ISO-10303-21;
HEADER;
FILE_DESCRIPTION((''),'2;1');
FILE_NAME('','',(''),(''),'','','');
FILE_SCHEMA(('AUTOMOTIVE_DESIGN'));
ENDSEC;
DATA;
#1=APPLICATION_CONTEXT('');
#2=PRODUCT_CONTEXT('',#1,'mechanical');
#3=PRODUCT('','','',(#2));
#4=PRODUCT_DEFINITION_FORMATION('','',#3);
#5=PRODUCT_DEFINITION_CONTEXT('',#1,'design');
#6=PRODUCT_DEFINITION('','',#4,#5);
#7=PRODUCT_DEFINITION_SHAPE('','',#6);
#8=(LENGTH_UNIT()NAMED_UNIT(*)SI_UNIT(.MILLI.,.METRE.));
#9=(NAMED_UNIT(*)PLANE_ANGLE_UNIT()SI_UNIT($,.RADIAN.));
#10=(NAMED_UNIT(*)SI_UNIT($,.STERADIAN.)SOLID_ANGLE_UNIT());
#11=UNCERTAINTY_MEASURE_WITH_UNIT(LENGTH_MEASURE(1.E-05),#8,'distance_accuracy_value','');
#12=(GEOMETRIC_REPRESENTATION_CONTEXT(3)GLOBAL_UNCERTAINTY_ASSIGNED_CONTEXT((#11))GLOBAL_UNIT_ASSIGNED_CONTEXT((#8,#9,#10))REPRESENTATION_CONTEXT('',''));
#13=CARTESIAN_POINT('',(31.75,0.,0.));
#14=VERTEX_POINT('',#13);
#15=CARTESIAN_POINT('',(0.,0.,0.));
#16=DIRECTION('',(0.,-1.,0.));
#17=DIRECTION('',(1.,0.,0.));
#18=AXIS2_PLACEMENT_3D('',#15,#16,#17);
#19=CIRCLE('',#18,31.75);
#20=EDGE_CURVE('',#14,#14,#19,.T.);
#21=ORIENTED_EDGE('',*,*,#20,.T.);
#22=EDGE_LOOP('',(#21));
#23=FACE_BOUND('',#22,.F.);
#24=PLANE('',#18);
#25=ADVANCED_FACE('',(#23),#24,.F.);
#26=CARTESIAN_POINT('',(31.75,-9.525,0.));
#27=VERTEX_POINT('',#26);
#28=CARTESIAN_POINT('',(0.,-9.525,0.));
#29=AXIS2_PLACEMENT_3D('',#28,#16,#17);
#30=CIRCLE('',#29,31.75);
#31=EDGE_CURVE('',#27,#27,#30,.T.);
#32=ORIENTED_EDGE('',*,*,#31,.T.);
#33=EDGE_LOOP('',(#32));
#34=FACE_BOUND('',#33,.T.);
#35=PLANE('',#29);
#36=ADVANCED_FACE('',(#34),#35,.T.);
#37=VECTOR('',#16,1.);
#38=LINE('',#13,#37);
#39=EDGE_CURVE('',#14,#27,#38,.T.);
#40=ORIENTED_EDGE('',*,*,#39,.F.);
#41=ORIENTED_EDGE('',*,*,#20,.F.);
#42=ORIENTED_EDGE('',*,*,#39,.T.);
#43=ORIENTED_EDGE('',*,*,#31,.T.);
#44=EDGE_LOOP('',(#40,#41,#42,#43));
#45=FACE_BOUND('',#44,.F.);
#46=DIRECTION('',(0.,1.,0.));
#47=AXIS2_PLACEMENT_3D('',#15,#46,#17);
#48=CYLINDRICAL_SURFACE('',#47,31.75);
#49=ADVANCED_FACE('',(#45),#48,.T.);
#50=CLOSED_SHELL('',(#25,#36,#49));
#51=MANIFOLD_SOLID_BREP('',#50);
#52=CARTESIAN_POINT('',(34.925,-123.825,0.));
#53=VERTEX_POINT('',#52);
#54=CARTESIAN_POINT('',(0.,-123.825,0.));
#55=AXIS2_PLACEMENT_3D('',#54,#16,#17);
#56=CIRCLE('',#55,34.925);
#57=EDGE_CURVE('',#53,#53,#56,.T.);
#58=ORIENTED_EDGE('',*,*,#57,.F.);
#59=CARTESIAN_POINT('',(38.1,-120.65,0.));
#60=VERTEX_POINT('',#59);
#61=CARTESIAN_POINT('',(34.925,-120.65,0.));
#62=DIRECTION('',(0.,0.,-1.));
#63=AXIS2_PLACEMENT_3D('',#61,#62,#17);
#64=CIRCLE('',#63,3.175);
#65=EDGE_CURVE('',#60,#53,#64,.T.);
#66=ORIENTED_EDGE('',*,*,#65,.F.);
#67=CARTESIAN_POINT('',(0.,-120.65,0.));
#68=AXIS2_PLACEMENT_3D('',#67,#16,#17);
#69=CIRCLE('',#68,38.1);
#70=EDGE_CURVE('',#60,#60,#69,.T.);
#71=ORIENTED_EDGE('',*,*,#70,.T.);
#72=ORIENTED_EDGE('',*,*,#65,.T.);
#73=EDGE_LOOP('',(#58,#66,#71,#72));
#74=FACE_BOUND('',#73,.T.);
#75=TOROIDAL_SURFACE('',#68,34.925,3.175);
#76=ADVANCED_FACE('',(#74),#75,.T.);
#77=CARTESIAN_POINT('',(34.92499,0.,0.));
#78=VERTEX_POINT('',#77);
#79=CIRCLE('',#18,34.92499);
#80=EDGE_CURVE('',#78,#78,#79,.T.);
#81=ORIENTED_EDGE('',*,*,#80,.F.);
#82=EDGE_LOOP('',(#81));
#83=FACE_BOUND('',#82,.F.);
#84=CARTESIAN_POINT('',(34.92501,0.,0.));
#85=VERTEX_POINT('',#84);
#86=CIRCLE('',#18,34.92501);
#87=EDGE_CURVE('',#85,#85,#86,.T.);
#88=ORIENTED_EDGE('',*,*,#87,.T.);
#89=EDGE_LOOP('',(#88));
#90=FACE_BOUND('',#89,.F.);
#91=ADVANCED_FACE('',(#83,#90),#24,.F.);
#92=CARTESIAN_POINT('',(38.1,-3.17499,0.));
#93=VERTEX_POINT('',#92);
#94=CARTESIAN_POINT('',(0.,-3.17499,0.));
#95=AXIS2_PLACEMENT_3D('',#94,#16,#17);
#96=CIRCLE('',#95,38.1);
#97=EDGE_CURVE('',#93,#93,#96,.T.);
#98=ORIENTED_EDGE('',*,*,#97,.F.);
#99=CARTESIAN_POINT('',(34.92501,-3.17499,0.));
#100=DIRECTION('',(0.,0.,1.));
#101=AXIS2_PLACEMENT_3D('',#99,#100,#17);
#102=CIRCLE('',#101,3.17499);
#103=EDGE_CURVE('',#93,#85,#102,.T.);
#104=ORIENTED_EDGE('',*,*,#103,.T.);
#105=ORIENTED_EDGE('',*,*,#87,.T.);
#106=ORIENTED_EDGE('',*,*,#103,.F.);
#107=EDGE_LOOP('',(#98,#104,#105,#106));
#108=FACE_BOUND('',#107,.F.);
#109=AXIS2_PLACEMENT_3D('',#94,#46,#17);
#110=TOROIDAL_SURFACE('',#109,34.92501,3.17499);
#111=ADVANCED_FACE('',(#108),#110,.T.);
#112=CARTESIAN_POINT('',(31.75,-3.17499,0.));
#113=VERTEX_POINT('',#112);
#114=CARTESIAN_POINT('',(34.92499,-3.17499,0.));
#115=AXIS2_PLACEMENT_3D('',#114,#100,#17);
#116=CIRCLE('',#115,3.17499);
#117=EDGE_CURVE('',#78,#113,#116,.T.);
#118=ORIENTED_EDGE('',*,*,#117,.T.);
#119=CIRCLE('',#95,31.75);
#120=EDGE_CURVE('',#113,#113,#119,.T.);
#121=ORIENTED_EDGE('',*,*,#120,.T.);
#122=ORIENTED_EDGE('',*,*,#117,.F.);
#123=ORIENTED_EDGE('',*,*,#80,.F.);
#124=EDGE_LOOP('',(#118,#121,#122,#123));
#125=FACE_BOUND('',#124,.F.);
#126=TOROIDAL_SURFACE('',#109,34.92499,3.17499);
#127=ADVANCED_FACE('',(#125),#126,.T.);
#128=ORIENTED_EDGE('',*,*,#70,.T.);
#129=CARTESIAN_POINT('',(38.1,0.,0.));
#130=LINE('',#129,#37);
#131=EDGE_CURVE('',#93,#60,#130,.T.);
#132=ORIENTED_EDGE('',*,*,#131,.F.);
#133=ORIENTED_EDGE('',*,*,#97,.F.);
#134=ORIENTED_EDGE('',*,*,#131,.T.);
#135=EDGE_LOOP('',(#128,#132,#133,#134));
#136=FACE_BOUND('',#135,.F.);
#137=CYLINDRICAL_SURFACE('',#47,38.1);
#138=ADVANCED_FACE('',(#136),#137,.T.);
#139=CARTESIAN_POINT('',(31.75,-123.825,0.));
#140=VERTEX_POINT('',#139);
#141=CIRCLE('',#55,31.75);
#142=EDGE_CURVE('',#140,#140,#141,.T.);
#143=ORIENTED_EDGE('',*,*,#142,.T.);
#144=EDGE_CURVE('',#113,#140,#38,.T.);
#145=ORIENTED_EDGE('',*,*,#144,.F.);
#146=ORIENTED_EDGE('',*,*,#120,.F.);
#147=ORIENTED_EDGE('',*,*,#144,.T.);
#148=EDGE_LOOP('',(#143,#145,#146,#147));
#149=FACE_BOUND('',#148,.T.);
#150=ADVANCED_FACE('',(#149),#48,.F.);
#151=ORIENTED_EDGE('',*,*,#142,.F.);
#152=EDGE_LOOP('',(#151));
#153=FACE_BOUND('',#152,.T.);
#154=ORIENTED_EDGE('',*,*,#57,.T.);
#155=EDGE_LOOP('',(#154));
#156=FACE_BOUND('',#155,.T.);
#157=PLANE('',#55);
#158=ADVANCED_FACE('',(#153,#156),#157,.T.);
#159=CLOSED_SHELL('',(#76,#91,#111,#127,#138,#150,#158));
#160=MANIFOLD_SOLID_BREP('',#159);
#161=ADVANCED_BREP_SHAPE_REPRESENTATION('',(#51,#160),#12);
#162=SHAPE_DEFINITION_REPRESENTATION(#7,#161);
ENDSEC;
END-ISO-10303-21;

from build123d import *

# Parameters (mm, degrees)
F0_R     = 38.1
F0_R_2   = 31.75
F1_DEPTH = 123.825
F2_R     = 3.175
F3_R     = 3.17499
F4_DEPTH = 9.525


# Not quite as in the source:
# - a fillet or chamfer is up to 0.001 mm smaller than in the source, because OpenCascade refuses the exact size


with BuildPart() as f1:
    # F0 (on Front) → F1 (new body)
    with BuildSketch(Plane.XZ):
        Circle(F0_R)
        Circle(F0_R_2, mode=Mode.SUBTRACT)
    extrude(amount=F1_DEPTH)

    # F2
    f2_edges = [f1.edges().sort_by_distance(p)[0] for p in [
        (-38.1, -123.825, 0),
    ]]
    fillet(f2_edges, radius=F2_R)

    # F3 (radius 3.175 in the source; OpenCascade refuses exactly that, so slightly less here)
    f3_edges = [f1.edges().sort_by_distance(p)[0] for p in [
        (-38.1, 0, 0),
        (-31.75, 0, 0),
    ]]
    fillet(f3_edges, radius=F3_R)


with BuildPart() as f4:
    # F0 (on Front) → F4 (new body)
    with BuildSketch(Plane.XZ):
        Circle(F0_R_2)
    extrude(amount=F4_DEPTH)


solid = Compound([f1.part, f4.part])
